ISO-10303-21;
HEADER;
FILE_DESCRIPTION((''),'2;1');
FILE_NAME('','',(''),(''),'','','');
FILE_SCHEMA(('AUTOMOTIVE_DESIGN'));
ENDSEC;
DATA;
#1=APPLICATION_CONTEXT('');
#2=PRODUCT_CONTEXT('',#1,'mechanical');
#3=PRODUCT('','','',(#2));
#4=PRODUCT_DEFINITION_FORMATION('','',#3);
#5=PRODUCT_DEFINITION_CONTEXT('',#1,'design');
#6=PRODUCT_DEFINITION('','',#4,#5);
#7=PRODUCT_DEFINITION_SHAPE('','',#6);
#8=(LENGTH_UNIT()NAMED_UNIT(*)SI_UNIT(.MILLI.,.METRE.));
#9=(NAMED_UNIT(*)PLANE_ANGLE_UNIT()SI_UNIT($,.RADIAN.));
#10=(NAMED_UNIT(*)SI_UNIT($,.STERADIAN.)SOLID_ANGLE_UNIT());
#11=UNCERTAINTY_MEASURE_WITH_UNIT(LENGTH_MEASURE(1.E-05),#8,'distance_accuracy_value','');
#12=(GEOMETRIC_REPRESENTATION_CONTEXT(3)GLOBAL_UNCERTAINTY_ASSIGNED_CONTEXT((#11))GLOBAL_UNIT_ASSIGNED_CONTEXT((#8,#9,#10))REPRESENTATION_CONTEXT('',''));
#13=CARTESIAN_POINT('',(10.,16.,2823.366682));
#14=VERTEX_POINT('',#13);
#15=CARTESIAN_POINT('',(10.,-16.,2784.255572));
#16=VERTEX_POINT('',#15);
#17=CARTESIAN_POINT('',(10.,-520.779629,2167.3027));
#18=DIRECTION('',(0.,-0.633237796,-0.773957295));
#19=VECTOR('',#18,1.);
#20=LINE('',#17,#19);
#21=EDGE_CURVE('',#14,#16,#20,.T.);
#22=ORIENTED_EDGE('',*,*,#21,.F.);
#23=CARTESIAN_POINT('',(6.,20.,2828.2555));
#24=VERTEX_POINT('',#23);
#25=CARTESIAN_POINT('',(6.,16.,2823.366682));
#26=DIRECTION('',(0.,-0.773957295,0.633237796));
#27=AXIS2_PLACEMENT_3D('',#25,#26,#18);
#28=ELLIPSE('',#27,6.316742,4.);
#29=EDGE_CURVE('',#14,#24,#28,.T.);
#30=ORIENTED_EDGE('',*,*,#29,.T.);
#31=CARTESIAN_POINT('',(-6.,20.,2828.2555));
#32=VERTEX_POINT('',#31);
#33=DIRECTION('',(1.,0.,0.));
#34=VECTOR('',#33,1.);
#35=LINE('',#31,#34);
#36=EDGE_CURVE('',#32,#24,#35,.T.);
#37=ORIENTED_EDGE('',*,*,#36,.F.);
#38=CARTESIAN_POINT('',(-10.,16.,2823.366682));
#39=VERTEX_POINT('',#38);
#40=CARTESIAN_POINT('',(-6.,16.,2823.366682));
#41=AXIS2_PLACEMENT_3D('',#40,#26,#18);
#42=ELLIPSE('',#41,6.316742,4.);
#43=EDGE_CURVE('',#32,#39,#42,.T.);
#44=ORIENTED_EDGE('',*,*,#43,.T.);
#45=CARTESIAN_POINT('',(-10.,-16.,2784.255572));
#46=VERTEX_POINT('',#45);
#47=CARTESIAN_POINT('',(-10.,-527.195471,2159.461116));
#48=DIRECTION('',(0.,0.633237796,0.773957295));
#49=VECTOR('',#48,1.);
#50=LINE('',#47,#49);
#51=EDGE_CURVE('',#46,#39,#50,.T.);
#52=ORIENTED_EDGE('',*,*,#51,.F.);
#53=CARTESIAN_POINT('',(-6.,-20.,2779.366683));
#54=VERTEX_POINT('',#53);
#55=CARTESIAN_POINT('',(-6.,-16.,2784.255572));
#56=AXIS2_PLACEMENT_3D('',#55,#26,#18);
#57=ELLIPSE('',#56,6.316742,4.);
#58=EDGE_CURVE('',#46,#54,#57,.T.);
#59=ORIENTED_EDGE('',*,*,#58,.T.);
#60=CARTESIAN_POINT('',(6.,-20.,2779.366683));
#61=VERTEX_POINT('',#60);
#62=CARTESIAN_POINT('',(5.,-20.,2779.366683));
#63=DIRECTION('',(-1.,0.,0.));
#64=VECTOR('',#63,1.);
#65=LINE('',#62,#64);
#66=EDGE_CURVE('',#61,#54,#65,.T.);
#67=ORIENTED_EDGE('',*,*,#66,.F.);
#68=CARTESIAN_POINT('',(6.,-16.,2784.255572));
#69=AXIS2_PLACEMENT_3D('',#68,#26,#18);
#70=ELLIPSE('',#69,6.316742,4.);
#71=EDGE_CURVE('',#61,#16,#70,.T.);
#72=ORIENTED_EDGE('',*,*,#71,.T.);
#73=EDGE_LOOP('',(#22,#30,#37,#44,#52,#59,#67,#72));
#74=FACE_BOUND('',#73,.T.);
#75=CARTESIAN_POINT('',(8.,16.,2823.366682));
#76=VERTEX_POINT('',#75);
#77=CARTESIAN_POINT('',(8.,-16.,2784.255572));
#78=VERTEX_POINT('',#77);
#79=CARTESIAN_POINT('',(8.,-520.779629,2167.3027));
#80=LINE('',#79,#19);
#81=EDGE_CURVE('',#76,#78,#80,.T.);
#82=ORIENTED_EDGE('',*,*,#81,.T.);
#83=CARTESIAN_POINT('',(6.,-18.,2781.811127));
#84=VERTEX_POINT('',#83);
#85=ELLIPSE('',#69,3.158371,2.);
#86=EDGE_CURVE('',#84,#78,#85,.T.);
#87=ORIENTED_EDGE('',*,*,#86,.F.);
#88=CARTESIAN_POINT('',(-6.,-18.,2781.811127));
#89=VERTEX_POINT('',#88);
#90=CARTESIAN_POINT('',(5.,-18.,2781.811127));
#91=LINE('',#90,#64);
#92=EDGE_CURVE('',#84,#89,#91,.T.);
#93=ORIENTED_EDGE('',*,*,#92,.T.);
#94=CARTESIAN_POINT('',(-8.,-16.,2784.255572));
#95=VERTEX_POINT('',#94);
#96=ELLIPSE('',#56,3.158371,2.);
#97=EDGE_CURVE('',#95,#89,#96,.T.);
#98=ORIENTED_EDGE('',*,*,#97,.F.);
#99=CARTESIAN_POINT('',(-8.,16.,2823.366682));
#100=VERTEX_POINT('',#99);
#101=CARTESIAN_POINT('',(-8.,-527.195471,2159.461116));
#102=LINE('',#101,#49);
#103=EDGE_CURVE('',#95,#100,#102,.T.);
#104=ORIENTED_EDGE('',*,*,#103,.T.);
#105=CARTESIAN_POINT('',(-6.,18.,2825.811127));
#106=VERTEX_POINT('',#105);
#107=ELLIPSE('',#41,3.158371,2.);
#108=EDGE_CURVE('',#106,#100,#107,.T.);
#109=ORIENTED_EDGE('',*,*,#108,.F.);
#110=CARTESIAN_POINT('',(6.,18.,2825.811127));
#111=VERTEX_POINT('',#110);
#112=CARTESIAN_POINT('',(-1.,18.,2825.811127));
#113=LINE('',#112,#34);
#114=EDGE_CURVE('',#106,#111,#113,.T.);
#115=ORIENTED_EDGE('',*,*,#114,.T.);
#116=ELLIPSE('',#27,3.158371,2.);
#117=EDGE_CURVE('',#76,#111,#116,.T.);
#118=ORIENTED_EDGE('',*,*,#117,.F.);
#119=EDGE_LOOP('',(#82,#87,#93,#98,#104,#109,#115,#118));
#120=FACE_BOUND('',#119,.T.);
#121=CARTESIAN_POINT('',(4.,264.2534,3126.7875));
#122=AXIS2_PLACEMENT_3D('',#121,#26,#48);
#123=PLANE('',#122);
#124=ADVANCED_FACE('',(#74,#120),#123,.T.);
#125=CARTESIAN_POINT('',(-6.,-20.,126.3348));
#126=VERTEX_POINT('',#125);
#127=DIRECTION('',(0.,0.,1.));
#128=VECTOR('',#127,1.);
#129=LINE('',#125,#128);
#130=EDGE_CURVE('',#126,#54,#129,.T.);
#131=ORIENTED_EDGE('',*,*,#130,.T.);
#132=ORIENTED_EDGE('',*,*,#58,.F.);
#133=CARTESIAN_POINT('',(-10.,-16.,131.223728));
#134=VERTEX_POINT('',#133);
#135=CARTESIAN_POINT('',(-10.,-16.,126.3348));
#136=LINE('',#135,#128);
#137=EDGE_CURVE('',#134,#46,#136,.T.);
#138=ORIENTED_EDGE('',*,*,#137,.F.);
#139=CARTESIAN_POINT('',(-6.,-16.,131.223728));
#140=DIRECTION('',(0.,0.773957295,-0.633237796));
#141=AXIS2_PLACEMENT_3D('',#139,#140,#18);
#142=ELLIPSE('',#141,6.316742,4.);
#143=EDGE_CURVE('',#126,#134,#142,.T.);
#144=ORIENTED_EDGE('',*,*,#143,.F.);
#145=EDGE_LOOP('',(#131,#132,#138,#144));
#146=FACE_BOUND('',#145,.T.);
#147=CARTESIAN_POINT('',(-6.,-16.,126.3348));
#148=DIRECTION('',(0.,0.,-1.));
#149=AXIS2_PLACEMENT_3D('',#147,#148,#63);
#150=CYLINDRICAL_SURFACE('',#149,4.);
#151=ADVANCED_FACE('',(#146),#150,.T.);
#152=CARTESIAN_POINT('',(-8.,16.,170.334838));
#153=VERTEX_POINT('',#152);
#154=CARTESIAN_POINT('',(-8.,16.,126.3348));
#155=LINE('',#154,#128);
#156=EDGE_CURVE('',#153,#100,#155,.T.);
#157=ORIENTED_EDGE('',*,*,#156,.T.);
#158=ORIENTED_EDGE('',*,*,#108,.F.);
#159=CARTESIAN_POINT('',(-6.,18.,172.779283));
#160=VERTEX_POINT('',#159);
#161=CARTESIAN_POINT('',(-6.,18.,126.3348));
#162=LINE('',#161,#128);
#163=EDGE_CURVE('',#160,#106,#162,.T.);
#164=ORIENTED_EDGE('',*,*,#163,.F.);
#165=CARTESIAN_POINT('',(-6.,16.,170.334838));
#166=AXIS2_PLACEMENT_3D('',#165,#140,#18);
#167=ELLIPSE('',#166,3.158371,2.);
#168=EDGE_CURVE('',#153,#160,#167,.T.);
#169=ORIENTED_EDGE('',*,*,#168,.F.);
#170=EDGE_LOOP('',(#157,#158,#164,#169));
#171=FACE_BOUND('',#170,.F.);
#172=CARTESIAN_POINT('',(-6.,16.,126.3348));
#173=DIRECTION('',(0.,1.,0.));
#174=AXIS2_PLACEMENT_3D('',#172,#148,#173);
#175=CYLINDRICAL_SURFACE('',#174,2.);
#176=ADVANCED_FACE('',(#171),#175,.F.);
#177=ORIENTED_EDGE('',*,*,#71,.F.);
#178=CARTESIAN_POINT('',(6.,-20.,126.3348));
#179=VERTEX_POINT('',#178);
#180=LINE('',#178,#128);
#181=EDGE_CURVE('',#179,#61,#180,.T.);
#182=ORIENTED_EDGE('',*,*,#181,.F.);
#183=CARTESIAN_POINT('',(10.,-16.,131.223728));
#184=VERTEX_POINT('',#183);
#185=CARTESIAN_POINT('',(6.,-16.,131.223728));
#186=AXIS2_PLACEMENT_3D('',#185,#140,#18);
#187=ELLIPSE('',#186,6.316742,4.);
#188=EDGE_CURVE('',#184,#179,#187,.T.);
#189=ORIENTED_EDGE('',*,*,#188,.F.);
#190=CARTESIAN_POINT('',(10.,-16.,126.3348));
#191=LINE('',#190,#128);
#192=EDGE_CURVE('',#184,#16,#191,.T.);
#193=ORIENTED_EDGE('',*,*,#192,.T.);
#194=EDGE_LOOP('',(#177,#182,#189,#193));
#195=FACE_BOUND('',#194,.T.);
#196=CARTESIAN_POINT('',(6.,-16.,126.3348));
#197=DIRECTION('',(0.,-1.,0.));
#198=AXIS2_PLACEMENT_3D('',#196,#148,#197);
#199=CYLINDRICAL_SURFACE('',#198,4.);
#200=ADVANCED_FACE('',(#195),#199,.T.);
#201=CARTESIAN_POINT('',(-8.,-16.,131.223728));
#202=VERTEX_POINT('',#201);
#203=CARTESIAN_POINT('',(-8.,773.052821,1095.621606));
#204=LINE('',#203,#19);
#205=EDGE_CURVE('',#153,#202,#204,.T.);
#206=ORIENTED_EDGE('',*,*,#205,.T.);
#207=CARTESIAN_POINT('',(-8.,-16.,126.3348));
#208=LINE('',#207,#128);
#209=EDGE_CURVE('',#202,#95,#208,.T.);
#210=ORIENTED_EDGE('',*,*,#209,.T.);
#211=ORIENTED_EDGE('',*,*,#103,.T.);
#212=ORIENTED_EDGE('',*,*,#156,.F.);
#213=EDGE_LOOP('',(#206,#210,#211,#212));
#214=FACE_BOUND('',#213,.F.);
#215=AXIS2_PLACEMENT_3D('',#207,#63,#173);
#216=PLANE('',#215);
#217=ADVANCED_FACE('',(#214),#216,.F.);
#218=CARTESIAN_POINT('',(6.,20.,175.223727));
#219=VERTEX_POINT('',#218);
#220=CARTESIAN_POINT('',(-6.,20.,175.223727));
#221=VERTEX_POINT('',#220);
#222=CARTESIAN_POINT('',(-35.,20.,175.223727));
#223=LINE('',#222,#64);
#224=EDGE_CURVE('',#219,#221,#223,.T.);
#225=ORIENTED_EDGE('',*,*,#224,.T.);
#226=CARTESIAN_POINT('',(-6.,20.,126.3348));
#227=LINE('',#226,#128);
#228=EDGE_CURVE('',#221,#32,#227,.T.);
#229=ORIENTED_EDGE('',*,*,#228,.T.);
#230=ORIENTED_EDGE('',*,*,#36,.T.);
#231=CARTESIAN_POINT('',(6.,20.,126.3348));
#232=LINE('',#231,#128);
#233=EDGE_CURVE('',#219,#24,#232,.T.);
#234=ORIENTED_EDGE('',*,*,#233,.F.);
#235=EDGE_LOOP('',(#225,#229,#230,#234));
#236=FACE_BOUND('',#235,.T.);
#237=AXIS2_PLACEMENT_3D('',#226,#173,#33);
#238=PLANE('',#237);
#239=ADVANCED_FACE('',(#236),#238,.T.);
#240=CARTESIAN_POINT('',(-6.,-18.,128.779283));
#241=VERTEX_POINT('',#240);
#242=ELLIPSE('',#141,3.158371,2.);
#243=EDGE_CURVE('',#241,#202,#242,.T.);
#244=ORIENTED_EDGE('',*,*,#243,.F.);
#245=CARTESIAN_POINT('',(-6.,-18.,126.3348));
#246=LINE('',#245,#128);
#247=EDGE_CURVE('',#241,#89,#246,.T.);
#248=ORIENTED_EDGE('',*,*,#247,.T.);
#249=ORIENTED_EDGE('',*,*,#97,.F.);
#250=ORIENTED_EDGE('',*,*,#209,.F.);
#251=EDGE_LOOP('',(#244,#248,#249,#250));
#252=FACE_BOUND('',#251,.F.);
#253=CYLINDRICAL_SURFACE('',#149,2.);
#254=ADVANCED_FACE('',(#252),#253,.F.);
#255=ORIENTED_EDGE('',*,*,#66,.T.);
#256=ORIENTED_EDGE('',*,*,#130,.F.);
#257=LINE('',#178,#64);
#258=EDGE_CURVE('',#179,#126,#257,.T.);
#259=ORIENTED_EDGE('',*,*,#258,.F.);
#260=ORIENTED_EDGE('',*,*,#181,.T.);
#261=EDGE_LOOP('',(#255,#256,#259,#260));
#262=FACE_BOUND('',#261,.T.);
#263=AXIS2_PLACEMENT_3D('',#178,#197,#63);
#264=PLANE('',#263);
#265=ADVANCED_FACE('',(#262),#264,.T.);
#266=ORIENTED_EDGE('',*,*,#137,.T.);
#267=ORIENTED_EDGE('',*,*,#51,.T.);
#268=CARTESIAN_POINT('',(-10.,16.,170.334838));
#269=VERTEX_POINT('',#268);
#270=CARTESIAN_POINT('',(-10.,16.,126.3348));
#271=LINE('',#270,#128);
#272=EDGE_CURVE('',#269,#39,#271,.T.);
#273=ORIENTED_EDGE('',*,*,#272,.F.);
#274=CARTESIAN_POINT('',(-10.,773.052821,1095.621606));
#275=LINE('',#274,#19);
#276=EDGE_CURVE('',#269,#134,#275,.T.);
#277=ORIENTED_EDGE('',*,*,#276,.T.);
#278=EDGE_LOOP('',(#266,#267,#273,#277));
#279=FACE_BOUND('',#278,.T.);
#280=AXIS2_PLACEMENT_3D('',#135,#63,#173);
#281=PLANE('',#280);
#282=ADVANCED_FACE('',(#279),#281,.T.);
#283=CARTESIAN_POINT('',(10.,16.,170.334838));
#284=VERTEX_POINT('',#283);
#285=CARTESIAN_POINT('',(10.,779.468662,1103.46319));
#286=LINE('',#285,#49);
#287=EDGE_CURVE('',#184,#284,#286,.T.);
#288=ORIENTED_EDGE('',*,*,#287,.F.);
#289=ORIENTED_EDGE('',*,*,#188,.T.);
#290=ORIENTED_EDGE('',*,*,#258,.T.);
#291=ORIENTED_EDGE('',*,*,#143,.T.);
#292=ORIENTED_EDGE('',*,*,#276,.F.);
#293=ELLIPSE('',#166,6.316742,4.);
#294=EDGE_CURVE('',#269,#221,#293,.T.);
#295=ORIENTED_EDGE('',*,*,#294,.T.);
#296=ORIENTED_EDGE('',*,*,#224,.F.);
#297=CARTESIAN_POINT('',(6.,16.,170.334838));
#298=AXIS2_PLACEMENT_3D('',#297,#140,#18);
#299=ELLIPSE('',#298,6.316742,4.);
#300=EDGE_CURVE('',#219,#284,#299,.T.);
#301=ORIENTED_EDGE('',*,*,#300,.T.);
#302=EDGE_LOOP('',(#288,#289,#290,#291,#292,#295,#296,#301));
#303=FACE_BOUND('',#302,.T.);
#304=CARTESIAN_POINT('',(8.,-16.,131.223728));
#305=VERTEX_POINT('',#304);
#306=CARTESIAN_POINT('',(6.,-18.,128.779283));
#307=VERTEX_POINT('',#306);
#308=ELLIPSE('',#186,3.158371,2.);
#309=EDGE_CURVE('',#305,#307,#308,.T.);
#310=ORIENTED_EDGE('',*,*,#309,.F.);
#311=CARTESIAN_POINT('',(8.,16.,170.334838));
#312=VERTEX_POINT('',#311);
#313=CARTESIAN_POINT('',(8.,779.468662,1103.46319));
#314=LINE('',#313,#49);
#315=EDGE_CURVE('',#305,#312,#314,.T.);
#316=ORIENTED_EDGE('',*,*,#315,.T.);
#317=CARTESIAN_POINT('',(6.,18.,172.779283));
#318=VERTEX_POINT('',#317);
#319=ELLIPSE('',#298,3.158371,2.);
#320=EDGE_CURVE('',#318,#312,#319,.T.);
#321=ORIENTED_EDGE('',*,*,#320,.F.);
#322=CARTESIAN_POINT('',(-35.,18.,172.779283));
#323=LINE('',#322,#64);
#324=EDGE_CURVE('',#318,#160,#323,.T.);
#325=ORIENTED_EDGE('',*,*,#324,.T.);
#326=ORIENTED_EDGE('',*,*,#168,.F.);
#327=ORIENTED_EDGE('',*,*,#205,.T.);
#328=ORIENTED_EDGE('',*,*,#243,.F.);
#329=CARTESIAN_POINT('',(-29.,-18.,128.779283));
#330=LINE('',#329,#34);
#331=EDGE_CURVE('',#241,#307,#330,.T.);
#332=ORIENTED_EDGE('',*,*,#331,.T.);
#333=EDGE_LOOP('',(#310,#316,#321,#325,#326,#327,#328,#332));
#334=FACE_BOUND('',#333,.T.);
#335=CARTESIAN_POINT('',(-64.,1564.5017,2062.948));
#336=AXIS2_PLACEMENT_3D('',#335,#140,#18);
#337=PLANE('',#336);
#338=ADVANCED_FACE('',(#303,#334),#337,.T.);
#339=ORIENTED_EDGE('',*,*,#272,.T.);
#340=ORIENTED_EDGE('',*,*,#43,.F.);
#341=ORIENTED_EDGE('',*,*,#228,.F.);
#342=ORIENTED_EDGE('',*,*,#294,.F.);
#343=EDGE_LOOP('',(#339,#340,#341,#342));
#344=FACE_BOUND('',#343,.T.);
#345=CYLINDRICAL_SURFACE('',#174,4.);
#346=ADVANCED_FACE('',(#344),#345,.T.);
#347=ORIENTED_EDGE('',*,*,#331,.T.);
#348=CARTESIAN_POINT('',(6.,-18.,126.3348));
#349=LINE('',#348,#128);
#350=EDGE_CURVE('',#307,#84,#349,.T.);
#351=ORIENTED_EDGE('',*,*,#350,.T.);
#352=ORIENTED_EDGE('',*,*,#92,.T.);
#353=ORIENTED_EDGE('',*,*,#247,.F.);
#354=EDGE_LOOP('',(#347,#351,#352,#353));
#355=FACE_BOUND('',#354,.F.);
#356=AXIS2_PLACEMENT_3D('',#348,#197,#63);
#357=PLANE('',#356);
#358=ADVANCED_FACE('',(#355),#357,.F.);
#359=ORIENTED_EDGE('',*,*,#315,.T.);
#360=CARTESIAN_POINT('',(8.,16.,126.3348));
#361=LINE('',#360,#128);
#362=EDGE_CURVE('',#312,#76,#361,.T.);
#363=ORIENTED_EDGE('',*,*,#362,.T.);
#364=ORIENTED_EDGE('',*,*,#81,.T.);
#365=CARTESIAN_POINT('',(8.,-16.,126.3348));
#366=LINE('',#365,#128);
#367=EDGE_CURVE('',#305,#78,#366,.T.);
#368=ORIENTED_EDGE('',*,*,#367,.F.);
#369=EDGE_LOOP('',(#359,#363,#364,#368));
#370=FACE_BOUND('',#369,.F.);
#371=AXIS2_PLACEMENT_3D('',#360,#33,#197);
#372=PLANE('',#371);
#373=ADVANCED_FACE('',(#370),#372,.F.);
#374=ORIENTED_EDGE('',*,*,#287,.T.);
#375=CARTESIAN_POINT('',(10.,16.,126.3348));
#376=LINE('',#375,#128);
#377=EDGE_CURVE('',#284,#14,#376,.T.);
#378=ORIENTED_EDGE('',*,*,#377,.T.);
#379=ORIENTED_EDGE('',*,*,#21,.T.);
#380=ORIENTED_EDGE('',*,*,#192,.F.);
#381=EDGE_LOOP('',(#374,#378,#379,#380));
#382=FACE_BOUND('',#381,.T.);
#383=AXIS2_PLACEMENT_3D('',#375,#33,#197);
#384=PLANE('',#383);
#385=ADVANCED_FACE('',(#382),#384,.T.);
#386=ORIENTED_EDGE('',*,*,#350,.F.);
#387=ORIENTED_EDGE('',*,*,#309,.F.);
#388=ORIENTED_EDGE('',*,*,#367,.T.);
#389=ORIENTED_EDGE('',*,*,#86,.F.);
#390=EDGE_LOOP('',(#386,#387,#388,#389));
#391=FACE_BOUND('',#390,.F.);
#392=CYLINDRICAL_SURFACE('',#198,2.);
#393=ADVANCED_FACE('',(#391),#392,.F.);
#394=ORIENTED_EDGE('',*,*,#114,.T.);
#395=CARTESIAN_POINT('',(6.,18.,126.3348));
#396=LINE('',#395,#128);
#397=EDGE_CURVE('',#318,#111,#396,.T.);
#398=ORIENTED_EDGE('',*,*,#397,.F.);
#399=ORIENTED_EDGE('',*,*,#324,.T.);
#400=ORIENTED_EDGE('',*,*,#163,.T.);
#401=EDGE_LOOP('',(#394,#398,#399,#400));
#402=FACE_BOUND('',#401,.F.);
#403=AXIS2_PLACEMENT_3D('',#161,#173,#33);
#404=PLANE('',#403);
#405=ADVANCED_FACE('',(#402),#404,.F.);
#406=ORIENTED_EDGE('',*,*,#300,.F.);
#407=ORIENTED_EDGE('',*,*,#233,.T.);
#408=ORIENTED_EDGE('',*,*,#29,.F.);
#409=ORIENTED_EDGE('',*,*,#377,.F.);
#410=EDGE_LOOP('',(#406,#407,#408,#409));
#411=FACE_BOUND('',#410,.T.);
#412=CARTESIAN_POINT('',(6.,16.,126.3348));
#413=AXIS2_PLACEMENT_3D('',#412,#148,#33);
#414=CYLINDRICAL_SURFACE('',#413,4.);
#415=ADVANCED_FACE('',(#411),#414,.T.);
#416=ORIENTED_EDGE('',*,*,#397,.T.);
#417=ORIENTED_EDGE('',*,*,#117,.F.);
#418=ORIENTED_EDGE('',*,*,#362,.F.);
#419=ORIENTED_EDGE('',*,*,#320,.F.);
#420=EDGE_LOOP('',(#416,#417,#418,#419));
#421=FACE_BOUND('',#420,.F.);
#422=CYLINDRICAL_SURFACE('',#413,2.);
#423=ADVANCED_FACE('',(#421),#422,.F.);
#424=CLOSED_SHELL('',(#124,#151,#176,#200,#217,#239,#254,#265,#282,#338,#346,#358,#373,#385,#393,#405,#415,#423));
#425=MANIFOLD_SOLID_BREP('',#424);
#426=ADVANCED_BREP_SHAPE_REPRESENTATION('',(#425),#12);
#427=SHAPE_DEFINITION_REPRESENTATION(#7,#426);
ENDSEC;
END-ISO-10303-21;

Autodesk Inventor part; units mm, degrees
ref_plane "Start Plane" through (0, 0, 126.3348) normal (0, 0, 1) x (1, 0, 0)
ref_plane "End Plane" through (0, 0, 2828.2555) normal (0, 0, 1) x (1, 0, 0)
sketch "Sketch" plane through (0, 0, 0) normal (0, 0, 1) x (1, 0, 0)
  line L0 (-10, -16) -> (-10, 16)
  line L1 (-6, 20) -> (6, 20)
  line L2 (10, 16) -> (10, -16)
  line L3 (6, -20) -> (-6, -20)
  arc A0 (-10, -16) -> (-6, -20) centre (-6, -16) ccw
  arc A1 (10, 16) -> (6, 20) centre (6, 16) ccw
  arc A2 (-6, 20) -> (-10, 16) centre (-6, 16) ccw
  arc A3 (6, -20) -> (10, -16) centre (6, -16) ccw
  arc A4 (-6, 18) -> (-8, 16) centre (-6, 16) ccw
  line L4 (-6, 18) -> (6, 18)
  arc A5 (8, 16) -> (6, 18) centre (6, 16) ccw
  line L5 (8, 16) -> (8, -16)
  arc A6 (6, -18) -> (8, -16) centre (6, -16) ccw
  line L6 (6, -18) -> (-6, -18)
  arc A7 (-8, -16) -> (-6, -18) centre (-6, -16) ccw
  line L7 (-8, -16) -> (-8, 16)
  line L8 (0, 29.1598) -> (0, -29.1598) construction
  line L9 (-15.1598, 0) -> (15.1598, 0) construction
  dimension "d7" = 4
  dimension "d9" = 20
  dimension "d11" = 40
  dimension "d12" = 2
  dimension "d15" = 10
  dimension "d16" = 20
extrude "Body" add sketch "Sketch" along normal up to surface (2701.9207 mm away) from surface at 126.3348
sketch "Sketch3" plane through (0, 0, 0) normal (0, 0, 1) x (1, 0, 0)
  line L0 (0, 0) -> (10, 0)
ref_plane "Work Plane3" through (0, 0, 0) normal (0, -1, 0) x (1, 0, 0)
ref_plane "Work Plane4" through (-64, 1564.5017, 2062.948) normal (0, 0.7739573, -0.6332378) x (1, 0, 0)
split "Split1" plane through (-64, 1564.5017, 2062.948) removes the side toward (0, 0.7739573, -0.6332378)
ref_plane "Work Plane5" through (4, 264.2534, 3126.7875) normal (0, -0.7739573, 0.6332378) x (1, 0, 0)
split "Split2" plane through (4, 264.2534, 3126.7875) removes the side toward (0, -0.7739573, 0.6332378)
sketch "Sketch4" plane through (0, 0, 0) normal (0, -1, 0) x (1, 0, 0)
  line L0 (-2, 126.3348) -> (12, 126.3348) projected
  line L1 (-2, 2828.2555) -> (12, 2828.2555) projected
  dimension "d18" = 2701.9207
equation "\"d7\" = G_IR"
equation "\"d9\" = G_W"
equation "\"d11\" = G_H"
equation "\"d12\" = G_T"
equation "\"d15\" = 0.5 * d9"
equation "\"d16\" = 0.5 * d11"
equation "\"d3\" = G_L"
equation "\"G_W\" = 20"
equation "\"G_H\" = 40"
equation "\"G_T\" = 2"
equation "\"G_IR\" = 4"
equation "\"G_L\" = d18"
equation "\"G_OFFSET_START\" = -126.33485"
equation "\"G_OFFSET_END\" = -14.27854"
equation "\"d13\" = -G_OFFSET_START"
equation "\"d14\" = G_OFFSET_END + B_L"
equation "\"B_L\" = 2842.53408"
properties part number "ISO 10799-2 - 40x20x2 - 2701,92" material "Steel, Mild"
